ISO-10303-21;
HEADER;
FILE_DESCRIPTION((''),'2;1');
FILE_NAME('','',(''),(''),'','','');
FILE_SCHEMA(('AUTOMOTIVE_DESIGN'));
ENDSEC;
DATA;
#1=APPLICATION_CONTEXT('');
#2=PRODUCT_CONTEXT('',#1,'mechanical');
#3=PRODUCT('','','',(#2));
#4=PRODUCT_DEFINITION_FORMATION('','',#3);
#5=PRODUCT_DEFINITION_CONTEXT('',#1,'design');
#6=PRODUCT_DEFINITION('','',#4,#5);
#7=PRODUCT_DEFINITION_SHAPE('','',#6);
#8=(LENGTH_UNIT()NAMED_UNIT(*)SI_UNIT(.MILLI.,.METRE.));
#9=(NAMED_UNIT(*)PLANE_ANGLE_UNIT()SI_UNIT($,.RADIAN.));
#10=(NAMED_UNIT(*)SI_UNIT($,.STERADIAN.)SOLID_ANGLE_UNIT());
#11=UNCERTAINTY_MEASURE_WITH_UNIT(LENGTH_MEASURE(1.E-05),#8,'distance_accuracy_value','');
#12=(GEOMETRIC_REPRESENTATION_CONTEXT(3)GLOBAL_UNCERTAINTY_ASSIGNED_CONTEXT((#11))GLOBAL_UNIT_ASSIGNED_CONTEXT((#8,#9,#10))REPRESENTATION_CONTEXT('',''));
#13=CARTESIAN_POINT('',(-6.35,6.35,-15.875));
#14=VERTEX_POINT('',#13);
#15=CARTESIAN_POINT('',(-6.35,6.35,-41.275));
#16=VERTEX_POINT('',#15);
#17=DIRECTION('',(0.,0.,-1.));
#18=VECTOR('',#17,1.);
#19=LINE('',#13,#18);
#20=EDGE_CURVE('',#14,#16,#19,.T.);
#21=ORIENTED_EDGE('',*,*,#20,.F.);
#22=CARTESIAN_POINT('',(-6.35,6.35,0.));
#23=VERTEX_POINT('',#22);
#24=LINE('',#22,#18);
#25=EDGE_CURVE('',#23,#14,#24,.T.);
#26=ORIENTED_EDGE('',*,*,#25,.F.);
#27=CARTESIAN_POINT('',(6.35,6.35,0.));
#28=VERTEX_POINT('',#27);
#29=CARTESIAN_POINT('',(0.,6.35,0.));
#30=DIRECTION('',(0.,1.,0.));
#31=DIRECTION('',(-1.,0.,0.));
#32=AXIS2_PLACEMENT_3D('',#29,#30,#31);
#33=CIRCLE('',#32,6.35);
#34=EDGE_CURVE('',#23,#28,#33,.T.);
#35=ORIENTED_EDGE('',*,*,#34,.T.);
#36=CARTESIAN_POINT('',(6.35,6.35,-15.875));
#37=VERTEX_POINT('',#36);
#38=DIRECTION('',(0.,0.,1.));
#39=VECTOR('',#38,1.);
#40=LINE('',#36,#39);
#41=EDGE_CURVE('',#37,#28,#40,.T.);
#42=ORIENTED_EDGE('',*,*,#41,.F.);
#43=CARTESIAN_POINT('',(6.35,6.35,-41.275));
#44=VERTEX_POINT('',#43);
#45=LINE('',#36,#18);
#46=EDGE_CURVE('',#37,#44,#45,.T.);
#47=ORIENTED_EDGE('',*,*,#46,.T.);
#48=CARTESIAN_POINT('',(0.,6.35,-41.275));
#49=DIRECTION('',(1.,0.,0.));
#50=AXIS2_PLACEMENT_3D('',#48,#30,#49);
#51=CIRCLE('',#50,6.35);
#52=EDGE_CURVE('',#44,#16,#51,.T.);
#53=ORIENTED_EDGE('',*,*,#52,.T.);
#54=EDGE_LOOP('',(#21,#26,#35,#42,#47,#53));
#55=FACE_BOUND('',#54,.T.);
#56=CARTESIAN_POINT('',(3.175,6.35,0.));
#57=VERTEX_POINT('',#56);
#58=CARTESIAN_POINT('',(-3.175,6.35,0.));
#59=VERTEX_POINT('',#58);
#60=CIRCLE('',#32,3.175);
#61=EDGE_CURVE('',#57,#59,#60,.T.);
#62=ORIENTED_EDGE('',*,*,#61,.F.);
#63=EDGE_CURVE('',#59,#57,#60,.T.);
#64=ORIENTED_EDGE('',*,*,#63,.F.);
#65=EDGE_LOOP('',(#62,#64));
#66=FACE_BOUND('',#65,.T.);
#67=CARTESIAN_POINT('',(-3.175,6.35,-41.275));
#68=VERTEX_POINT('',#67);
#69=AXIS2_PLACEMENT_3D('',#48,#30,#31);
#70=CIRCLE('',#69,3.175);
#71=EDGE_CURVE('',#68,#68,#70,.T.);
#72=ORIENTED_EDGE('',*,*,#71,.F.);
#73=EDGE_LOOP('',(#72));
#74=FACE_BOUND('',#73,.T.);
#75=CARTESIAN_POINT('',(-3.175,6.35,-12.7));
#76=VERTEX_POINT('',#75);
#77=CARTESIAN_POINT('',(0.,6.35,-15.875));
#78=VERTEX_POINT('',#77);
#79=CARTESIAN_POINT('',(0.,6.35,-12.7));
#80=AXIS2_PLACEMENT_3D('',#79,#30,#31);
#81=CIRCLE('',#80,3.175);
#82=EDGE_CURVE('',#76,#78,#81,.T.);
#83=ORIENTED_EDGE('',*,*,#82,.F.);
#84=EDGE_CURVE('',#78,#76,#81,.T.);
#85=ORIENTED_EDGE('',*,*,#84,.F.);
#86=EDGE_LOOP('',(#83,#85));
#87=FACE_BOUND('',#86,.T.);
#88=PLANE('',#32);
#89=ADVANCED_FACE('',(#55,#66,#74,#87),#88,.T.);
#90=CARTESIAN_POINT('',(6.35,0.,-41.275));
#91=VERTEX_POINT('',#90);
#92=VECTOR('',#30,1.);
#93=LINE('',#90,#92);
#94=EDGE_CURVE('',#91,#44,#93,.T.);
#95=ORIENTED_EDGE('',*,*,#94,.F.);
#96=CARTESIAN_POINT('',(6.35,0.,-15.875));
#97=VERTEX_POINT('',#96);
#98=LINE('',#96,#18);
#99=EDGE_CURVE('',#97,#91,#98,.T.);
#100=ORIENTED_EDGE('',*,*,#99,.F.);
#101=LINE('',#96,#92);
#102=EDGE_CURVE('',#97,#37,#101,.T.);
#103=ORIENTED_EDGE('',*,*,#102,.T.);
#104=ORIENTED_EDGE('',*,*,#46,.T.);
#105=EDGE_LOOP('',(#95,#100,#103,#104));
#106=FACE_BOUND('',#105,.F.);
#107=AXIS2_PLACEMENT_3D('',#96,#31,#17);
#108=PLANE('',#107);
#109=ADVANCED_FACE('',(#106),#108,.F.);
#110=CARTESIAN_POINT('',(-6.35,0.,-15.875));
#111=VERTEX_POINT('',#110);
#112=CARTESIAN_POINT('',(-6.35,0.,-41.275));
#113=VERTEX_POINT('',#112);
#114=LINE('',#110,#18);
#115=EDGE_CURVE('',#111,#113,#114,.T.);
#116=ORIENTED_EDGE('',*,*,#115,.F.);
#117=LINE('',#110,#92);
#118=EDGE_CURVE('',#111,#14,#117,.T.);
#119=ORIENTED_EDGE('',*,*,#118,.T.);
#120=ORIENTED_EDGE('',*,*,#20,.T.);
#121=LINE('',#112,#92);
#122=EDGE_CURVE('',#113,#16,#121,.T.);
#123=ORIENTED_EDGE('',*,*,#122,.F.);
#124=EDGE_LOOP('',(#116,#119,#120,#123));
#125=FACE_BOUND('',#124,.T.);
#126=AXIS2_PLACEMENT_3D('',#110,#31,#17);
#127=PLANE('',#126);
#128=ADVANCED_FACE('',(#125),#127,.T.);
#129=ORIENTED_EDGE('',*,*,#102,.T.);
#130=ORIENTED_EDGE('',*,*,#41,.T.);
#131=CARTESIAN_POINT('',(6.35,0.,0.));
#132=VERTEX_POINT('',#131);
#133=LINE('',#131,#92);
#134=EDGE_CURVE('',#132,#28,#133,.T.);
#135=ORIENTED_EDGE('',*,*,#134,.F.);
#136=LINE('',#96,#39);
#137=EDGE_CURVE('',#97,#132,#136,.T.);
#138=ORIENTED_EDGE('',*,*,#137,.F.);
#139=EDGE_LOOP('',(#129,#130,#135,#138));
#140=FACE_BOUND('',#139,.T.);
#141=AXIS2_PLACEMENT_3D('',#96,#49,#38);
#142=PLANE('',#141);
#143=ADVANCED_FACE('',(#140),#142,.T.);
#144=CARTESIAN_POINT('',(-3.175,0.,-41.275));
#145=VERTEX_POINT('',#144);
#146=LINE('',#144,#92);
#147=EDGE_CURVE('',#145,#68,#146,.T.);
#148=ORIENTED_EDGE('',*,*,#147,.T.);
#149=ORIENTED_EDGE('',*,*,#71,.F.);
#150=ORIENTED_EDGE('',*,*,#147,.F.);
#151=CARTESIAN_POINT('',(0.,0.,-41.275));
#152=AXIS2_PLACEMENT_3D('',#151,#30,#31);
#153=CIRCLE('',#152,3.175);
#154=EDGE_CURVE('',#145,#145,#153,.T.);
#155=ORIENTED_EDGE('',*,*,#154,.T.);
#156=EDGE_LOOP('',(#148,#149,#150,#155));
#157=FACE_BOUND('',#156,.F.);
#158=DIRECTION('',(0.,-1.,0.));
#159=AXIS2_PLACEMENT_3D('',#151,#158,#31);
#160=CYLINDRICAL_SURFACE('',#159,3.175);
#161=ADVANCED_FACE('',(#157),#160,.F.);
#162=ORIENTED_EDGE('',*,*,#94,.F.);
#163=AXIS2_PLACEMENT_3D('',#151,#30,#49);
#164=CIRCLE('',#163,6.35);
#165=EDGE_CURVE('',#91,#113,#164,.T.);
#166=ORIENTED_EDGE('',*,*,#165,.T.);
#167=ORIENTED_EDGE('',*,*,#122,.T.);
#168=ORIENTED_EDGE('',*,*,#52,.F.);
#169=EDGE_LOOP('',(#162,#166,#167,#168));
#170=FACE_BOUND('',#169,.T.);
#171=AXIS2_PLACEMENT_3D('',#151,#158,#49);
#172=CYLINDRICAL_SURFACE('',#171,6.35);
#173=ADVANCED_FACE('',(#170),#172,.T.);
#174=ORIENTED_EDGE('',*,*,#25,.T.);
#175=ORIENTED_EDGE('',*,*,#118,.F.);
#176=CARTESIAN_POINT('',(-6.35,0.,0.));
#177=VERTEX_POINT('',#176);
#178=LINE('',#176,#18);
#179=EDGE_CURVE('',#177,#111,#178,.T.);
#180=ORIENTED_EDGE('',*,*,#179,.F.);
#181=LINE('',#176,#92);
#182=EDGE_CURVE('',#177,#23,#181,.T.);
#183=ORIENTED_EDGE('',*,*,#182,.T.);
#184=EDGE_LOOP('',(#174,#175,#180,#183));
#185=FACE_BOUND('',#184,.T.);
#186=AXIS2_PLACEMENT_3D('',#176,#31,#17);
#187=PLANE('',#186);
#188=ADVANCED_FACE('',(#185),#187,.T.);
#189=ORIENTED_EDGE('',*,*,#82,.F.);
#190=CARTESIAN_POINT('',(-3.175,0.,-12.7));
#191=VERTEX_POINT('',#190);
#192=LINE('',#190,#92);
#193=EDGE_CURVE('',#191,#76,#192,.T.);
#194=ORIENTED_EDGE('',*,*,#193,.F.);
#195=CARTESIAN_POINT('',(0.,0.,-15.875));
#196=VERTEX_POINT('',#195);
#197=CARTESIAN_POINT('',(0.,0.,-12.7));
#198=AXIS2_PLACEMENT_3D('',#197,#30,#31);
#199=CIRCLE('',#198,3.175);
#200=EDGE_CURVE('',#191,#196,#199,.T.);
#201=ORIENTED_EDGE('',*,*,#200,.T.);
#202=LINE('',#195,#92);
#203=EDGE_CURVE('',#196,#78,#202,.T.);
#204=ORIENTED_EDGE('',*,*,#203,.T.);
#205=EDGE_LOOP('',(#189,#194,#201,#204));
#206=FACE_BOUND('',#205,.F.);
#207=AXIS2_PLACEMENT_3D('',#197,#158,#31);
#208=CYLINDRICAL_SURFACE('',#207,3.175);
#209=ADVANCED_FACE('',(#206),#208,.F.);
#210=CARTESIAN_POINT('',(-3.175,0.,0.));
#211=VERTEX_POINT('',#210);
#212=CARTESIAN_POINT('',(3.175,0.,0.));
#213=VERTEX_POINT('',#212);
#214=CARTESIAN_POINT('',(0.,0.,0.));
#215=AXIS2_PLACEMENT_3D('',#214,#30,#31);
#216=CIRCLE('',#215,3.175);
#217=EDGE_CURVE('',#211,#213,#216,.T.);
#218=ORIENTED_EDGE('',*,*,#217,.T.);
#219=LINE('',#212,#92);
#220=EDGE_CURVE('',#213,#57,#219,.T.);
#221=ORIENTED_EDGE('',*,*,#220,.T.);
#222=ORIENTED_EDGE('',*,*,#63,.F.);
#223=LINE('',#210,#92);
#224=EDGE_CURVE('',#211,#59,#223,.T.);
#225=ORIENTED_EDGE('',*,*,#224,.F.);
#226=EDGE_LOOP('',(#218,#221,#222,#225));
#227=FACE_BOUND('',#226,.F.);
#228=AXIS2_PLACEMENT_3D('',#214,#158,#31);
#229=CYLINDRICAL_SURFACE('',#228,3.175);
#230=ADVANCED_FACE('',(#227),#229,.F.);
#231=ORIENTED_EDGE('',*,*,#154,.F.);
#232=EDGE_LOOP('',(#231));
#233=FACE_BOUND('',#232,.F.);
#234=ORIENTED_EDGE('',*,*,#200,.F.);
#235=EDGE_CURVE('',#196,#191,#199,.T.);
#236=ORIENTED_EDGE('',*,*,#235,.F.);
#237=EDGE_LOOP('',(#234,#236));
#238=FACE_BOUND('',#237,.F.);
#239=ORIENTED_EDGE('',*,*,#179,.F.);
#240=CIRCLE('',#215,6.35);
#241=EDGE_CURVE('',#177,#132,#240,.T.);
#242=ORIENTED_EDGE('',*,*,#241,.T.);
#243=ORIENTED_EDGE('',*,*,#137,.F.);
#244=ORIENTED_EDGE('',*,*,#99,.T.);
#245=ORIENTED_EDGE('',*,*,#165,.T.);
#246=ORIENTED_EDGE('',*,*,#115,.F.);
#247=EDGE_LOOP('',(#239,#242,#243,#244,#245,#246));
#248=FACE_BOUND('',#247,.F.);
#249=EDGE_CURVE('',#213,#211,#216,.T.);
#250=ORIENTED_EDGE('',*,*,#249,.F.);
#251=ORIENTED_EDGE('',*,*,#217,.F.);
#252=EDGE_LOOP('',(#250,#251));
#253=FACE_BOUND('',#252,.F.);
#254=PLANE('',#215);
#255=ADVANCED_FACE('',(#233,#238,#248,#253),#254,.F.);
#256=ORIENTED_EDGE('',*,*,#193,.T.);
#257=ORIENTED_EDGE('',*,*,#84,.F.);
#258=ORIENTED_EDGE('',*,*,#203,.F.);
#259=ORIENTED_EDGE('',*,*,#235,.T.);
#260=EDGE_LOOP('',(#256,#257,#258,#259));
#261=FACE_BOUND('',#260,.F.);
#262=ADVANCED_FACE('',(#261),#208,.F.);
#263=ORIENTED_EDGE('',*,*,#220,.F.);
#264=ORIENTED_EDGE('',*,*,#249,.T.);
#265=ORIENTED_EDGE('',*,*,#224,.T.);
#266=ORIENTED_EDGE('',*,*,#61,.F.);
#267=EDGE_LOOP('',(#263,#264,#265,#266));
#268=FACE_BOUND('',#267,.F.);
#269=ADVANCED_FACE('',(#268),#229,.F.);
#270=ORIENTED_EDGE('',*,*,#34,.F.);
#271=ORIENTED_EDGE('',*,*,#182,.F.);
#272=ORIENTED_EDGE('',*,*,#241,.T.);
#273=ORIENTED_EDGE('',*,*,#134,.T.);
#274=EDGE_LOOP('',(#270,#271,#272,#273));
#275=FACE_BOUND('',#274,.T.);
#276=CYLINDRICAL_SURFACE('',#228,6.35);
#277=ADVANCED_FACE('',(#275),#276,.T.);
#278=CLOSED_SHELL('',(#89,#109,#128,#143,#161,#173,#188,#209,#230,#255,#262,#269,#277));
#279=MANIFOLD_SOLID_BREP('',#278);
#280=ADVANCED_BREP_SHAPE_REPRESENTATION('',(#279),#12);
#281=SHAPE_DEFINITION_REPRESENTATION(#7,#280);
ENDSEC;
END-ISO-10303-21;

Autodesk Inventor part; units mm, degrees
ref_plane "YZ Plane" through (0, 0, 0) normal (1, 0, 0) x (0, 1, 0)
ref_plane "XZ Plane" through (0, 0, 0) normal (0, 1, 0) x (-1, 0, 0)
ref_plane "XY Plane" through (0, 0, 0) normal (0, 0, 1) x (1, 0, 0)
sketch "Sketch1" plane through (0, 0, 0) normal (0, 1, 0) x (-1, 0, 0)
  circle A0 centre (0, 0) radius 3.175
  circle A1 centre (0, -12.7) radius 3.175
  line L0 (-6.35, -15.875) -> (-6.35, 0)
  line L1 (6.35, 0) -> (6.35, -15.875)
  line L2 (-6.35, 0) -> (-3.175, 0)
  line L3 (-6.35, -15.875) -> (-6.35, -41.275)
  circle A2 centre (0, -41.275) radius 3.175
  arc A3 (-6.35, -41.275) -> (6.35, -41.275) centre (0, -41.275) ccw
  line L4 (-6.35, -41.275) -> (-6.35, -15.875)
  line L5 (-6.35, -15.875) -> (0, -15.875)
  line L6 (6.35, -15.875) -> (6.35, -41.275)
  arc A4 (6.35, 0) -> (-6.35, 0) centre (0, 0) ccw
  point P0 (6.35, -7.9375)
  dimension "d0" = 6.35
  dimension "d1" = 6.35
  dimension "d14" = 6.35
  dimension "d17" = 12.7
  dimension "d18" = 6.35
  dimension "d19" = 6.35
  dimension "d20" = 12.7
  dimension "d21" = 12.7
  dimension "d22" = 12.7
extrude "Extrusion1" add sketch "Sketch1" along normal blind 6.35
properties part number "Gear to Finger Connect"
